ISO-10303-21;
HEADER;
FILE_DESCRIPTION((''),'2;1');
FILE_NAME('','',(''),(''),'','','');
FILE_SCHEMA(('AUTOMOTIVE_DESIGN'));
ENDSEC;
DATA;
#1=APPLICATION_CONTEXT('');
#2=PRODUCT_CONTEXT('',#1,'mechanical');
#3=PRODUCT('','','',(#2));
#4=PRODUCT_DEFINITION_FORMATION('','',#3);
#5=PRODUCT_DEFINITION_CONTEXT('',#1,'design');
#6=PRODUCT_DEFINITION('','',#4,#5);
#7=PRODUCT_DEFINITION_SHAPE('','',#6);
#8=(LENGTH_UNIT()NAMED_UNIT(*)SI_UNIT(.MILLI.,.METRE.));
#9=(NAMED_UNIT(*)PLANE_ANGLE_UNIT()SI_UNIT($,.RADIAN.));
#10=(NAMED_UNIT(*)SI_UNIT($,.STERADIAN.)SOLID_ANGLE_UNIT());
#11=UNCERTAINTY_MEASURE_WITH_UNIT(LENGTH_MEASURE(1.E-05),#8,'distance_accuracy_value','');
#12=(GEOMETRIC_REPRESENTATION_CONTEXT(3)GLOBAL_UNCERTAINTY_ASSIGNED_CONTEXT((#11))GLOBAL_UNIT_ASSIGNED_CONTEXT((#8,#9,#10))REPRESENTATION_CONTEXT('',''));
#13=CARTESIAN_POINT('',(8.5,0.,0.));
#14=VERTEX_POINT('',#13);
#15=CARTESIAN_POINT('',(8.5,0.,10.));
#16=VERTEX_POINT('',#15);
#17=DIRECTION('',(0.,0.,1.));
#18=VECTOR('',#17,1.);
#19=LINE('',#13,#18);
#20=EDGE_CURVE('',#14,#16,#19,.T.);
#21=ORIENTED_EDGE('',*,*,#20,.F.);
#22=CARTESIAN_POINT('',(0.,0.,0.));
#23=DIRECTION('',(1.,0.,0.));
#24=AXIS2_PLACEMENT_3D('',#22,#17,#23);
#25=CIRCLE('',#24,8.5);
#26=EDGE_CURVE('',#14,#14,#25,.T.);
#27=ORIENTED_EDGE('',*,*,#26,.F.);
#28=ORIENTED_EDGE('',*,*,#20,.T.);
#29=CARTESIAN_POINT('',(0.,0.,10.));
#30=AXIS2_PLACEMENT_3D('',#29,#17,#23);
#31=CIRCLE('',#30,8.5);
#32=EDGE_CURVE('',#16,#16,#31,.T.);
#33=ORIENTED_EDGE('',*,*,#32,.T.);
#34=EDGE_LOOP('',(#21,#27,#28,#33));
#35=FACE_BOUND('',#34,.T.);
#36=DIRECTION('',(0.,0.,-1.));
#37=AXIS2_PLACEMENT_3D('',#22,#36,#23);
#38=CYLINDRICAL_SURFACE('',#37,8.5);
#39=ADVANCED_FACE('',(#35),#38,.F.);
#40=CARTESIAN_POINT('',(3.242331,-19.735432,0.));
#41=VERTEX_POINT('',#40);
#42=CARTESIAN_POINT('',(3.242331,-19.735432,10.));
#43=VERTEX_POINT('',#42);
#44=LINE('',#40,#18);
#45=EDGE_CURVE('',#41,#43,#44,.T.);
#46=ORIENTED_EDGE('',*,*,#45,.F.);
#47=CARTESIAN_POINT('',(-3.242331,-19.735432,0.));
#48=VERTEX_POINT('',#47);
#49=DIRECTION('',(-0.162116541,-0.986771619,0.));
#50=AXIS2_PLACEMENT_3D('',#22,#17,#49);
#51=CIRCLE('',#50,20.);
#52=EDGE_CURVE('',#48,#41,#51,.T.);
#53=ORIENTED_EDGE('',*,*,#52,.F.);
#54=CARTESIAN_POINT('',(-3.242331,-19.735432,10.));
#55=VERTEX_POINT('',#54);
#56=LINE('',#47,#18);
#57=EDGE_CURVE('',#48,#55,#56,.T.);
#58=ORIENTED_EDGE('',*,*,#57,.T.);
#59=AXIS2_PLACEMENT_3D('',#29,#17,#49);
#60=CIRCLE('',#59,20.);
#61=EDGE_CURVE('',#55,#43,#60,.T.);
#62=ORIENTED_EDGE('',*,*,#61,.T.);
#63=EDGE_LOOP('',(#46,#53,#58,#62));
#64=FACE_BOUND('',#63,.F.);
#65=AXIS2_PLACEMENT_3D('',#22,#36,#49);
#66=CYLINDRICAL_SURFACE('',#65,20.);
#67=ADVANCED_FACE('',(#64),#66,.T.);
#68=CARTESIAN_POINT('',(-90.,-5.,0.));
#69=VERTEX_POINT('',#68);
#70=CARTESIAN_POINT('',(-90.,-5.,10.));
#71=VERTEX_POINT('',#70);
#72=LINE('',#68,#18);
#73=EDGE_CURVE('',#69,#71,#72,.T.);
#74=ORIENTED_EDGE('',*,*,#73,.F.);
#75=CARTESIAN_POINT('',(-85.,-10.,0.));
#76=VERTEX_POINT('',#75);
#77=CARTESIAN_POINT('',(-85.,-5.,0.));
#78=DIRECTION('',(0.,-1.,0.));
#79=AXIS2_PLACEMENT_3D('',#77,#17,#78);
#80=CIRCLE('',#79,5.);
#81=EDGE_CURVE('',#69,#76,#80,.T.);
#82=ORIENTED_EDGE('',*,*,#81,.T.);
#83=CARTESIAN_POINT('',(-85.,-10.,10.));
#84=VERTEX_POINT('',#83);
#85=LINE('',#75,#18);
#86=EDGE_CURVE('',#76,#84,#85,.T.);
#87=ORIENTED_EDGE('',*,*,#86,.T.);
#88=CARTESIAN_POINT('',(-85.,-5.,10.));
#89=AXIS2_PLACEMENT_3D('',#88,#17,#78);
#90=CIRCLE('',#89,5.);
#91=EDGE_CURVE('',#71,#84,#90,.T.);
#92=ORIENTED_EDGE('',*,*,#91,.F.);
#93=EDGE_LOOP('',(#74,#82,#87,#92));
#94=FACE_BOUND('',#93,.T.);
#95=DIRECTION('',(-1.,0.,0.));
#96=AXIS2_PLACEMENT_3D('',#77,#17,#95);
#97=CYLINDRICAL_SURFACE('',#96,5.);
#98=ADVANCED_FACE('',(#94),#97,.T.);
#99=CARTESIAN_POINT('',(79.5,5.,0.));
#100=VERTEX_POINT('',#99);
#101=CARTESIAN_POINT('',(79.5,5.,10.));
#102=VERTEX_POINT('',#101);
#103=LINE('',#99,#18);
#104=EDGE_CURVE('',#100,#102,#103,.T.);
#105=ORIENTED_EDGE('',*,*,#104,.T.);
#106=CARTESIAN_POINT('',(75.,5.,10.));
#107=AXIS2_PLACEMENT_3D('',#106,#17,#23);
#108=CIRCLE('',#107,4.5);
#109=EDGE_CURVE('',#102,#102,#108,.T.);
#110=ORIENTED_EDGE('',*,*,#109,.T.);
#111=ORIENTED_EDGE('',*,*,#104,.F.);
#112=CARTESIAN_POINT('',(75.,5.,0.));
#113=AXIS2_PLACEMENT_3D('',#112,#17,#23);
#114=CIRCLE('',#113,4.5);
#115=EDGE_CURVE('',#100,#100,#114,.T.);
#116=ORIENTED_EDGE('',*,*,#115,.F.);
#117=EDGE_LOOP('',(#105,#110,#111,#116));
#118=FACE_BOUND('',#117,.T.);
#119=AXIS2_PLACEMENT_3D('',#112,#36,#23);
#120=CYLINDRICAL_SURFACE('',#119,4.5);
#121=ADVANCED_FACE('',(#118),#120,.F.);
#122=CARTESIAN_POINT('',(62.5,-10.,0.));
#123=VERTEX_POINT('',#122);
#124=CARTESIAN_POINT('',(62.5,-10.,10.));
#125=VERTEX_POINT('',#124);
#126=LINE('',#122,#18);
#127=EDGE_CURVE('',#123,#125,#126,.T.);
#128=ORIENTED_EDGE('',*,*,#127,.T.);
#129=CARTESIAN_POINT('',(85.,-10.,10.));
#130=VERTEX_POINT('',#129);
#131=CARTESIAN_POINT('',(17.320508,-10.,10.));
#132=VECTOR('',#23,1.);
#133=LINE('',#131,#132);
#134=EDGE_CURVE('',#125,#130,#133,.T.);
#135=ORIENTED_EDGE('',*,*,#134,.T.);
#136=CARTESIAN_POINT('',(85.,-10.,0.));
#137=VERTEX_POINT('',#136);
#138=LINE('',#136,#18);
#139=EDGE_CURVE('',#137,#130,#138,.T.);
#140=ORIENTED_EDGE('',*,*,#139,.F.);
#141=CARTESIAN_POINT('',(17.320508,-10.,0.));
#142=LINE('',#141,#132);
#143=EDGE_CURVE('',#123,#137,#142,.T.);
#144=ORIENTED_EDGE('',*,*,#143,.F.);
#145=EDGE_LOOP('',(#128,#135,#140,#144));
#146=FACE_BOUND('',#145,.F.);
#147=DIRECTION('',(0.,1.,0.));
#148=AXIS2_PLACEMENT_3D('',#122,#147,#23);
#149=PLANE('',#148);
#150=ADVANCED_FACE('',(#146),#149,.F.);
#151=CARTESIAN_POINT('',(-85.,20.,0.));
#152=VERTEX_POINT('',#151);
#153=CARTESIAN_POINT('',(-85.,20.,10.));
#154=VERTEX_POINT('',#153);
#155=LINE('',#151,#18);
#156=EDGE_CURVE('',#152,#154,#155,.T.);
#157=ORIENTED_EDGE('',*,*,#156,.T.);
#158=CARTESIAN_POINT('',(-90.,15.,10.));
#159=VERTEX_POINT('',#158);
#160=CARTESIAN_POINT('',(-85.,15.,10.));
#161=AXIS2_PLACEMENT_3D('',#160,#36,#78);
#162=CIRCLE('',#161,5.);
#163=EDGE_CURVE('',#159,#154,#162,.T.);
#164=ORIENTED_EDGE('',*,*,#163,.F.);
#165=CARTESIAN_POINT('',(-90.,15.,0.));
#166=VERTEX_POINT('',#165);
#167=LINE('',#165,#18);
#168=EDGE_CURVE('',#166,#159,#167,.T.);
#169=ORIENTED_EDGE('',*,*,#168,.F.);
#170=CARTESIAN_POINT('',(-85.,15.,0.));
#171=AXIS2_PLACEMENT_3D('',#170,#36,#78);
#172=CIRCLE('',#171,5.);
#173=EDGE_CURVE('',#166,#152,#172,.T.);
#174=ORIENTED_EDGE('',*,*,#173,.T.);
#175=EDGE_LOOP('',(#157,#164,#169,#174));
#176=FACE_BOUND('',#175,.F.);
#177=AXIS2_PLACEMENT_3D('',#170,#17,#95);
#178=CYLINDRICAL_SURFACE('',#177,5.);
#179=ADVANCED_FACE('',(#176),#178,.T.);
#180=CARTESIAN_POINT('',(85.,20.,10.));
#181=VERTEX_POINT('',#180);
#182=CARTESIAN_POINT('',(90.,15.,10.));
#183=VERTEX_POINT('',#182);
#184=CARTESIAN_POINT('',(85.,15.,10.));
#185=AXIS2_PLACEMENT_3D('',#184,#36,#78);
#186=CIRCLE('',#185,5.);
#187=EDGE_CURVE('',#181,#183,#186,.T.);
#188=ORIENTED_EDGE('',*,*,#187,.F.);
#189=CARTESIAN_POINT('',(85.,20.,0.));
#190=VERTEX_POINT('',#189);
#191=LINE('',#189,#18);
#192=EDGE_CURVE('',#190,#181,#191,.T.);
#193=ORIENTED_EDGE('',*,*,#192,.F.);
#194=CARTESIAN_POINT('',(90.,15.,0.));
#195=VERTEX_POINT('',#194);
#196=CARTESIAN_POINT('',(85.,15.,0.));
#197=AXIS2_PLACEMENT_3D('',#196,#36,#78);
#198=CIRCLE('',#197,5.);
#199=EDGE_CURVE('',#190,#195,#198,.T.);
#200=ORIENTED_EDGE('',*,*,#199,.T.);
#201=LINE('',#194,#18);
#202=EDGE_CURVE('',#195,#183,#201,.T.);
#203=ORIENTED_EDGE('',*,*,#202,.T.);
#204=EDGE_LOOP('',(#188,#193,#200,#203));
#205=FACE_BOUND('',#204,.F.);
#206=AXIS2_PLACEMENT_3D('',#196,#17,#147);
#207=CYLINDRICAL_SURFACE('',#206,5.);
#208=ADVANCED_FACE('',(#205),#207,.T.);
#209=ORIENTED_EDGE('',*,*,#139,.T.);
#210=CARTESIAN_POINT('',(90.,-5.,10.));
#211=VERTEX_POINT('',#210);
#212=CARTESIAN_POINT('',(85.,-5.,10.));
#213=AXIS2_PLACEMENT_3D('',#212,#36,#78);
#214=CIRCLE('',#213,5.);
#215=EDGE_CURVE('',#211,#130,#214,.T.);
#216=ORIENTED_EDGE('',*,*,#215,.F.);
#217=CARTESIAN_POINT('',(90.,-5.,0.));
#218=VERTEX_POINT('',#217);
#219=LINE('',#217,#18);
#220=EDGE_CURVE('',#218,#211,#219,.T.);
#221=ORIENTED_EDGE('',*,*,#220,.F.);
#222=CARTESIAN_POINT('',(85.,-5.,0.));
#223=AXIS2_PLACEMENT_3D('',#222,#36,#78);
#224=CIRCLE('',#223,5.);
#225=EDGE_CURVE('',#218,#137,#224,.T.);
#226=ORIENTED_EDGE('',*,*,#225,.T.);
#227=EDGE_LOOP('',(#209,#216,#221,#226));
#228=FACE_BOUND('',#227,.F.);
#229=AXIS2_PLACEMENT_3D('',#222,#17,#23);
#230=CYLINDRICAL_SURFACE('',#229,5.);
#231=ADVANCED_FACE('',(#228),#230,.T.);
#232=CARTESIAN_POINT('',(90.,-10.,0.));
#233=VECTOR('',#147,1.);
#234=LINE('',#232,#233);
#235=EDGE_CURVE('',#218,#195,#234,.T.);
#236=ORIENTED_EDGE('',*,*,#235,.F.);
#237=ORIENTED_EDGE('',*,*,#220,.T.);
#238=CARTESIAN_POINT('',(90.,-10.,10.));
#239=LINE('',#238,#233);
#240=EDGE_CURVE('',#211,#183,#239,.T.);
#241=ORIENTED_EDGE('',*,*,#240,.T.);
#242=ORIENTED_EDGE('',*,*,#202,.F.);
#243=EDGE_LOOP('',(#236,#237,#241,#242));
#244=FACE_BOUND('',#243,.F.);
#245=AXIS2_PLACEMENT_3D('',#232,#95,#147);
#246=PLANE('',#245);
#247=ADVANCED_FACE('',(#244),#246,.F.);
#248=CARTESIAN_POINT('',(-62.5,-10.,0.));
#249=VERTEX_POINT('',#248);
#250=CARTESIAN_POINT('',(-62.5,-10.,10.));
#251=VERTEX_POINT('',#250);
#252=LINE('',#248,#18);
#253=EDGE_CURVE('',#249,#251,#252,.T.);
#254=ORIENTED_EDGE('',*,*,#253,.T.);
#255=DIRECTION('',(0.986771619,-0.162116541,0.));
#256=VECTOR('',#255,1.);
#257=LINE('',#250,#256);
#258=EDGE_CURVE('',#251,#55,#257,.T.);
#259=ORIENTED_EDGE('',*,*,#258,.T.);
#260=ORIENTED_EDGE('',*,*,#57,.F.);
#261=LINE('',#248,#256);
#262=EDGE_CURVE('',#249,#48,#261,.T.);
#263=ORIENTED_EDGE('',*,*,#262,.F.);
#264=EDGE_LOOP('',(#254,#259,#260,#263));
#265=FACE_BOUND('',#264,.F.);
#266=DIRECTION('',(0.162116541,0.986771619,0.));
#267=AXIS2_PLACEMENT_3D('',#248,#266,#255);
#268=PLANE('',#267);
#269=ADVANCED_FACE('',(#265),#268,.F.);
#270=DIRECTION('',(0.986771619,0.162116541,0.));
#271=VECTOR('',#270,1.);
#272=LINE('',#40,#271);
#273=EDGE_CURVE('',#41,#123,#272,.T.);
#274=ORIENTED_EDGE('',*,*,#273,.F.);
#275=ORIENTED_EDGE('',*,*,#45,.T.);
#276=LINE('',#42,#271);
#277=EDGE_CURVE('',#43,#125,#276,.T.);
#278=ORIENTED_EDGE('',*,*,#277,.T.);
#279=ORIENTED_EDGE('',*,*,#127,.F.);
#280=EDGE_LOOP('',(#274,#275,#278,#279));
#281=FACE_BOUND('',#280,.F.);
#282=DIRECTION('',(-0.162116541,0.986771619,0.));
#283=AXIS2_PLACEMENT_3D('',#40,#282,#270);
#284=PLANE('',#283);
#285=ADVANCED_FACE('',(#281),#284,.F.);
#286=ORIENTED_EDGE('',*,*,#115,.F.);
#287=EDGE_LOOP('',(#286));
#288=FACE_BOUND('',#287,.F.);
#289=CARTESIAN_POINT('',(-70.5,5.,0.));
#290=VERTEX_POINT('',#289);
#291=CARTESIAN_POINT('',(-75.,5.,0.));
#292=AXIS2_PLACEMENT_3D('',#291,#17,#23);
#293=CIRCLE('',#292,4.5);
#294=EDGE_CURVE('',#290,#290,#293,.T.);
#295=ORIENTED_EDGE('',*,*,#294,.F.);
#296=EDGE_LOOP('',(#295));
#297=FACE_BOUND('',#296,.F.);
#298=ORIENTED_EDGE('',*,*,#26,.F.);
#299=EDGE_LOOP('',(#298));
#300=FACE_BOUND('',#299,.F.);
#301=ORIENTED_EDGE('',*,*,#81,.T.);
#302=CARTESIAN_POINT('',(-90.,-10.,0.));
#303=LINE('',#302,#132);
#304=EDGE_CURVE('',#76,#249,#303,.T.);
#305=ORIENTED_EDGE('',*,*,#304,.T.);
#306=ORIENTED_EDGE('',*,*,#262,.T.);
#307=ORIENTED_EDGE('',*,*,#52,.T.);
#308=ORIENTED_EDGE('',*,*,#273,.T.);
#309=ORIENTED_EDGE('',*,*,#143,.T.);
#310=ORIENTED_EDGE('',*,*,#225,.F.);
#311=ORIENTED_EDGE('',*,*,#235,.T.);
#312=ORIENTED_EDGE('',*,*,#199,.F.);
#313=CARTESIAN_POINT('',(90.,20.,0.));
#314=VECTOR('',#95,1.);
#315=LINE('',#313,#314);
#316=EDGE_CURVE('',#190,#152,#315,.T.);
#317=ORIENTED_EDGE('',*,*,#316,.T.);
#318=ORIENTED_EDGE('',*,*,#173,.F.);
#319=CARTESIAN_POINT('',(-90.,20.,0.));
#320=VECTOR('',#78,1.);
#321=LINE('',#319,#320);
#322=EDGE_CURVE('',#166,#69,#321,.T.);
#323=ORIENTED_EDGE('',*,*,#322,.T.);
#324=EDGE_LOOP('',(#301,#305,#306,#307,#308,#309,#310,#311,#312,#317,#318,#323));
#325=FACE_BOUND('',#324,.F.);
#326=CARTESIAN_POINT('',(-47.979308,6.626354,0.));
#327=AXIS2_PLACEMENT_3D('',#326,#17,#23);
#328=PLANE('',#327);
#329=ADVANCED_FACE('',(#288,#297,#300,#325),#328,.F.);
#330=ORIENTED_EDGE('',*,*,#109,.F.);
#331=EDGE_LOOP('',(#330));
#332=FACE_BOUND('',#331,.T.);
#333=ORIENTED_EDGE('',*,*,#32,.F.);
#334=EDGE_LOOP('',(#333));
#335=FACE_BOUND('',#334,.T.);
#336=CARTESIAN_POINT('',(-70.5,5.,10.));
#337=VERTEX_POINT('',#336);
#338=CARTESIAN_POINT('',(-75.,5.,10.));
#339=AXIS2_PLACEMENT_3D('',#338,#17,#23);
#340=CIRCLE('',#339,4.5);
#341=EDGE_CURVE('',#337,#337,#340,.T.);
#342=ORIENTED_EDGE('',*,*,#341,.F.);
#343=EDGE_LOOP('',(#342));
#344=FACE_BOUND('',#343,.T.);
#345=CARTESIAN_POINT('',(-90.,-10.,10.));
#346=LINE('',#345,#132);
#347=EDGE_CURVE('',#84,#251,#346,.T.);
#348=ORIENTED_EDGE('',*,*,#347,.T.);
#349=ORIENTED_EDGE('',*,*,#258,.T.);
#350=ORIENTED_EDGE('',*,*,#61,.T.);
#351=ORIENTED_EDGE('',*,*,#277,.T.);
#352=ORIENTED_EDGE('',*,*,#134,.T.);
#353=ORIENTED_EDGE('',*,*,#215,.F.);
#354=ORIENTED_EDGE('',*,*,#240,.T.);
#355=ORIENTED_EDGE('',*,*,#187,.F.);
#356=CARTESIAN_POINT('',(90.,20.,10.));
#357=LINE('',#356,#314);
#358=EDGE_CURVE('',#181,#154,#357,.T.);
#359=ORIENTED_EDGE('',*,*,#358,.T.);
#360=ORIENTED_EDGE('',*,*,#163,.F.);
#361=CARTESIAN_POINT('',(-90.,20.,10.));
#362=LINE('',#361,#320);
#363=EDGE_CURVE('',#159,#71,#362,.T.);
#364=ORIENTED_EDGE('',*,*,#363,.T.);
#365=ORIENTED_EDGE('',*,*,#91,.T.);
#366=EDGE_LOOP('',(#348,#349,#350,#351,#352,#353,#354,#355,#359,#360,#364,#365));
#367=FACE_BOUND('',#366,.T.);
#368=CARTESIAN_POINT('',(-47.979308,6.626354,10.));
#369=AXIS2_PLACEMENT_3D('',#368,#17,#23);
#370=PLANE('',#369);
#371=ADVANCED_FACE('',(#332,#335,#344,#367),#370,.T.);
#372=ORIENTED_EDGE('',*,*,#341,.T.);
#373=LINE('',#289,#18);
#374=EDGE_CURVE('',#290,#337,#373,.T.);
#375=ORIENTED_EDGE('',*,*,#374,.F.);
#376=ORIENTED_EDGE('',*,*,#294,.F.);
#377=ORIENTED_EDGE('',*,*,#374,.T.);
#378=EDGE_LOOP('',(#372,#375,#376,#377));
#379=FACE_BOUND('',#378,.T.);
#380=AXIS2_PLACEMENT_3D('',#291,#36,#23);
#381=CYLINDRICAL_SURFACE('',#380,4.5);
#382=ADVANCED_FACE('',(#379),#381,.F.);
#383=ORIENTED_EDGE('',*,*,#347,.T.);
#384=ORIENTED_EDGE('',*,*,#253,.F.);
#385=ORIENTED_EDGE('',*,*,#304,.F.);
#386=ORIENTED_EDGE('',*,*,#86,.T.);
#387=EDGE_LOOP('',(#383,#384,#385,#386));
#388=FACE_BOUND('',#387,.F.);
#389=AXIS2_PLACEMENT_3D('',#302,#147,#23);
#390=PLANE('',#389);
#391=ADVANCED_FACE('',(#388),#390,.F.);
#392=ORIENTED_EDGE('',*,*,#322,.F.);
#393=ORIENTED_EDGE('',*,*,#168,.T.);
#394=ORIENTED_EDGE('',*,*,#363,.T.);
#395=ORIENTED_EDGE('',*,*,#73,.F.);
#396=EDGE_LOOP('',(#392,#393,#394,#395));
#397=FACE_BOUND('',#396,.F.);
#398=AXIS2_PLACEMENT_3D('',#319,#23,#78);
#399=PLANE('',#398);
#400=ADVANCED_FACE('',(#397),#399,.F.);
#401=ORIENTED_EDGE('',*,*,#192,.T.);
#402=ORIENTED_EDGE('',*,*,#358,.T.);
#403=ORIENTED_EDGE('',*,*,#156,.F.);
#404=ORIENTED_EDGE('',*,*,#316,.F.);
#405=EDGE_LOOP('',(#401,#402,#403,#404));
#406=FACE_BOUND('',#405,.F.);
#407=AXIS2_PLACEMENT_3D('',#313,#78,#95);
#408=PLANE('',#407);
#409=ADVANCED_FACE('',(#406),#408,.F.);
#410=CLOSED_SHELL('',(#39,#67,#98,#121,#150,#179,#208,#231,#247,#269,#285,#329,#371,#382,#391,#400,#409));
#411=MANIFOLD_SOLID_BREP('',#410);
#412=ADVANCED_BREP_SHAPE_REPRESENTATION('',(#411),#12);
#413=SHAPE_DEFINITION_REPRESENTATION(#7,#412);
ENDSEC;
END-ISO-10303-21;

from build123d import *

# Parameters (mm, degrees)
F0_R     = 4.5
F0_R_2   = 8.5
F1_DEPTH = 10
F2_R     = 5


with BuildPart() as f1:
    # F0 (on Top) → F1 (new body)
    with BuildSketch(Plane.XY):
        with BuildLine():
            Line((-90, 20), (-90, -10))
            Line((-90, -10), (-62.5, -10))
            Line((-62.5, -10), (-17.3205080757, -10))
            ThreePointArc((-17.3205080757, -10), (-17.3205080604, 10.0000000264), (6.11e-08, 20))
            Line((6.11e-08, 20), (-90, 20))
        make_face()
        with Locations((-75, 5)):
            Circle(F0_R, mode=Mode.SUBTRACT)
        with BuildLine():
            Line((-17.3205080757, -10), (-62.5, -10))
            Line((-62.5, -10), (-3.2423308207, -19.7354323705))
            ThreePointArc((-3.2423308207, -19.7354323705), (-11.3755108338, -16.4498557219), (-17.3205080757, -10))
        make_face()
        with BuildLine():
            ThreePointArc((6.11e-08, 20), (-17.3205080604, 10.0000000264), (-17.3205080757, -10))
            Line((-17.3205080757, -10), (17.3205080757, -10))
            ThreePointArc((17.3205080757, -10), (19.3185165258, -5.1763809021), (20, 0))
            ThreePointArc((20, 0), (14.1421356453, 14.1421356021), (6.11e-08, 20))
        make_face()
        Circle(F0_R_2, mode=Mode.SUBTRACT)
        with BuildLine():
            Line((17.3205080757, -10), (-17.3205080757, -10))
            ThreePointArc((-17.3205080757, -10), (-11.3755108338, -16.4498557219), (-3.2423308207, -19.7354323705))
            ThreePointArc((-3.2423308207, -19.7354323705), (0, -20), (3.2423308207, -19.7354323705))
            ThreePointArc((3.2423308207, -19.7354323705), (11.3755108338, -16.4498557219), (17.3205080757, -10))
        make_face()
        with BuildLine():
            Line((90, 20), (6.11e-08, 20))
            ThreePointArc((6.11e-08, 20), (14.1421356453, 14.1421356021), (20, 0))
            ThreePointArc((20, 0), (19.3185165258, -5.1763809021), (17.3205080757, -10))
            Line((17.3205080757, -10), (62.5, -10))
            Line((62.5, -10), (90, -10))
            Line((90, -10), (90, 20))
        make_face()
        with Locations((75, 5)):
            Circle(F0_R, mode=Mode.SUBTRACT)
        with BuildLine():
            Line((62.5, -10), (17.3205080757, -10))
            ThreePointArc((17.3205080757, -10), (11.3755108338, -16.4498557219), (3.2423308207, -19.7354323705))
            Line((3.2423308207, -19.7354323705), (62.5, -10))
        make_face()
    extrude(amount=F1_DEPTH)

    # F2
    f2_edges = [f1.edges().sort_by_distance(p)[0] for p in [
        (-90, -10, 5),
        (90, -10, 5),
        (-90, 20, 5),
        (90, 20, 5),
    ]]
    fillet(f2_edges, radius=F2_R)


solid = f1.part
